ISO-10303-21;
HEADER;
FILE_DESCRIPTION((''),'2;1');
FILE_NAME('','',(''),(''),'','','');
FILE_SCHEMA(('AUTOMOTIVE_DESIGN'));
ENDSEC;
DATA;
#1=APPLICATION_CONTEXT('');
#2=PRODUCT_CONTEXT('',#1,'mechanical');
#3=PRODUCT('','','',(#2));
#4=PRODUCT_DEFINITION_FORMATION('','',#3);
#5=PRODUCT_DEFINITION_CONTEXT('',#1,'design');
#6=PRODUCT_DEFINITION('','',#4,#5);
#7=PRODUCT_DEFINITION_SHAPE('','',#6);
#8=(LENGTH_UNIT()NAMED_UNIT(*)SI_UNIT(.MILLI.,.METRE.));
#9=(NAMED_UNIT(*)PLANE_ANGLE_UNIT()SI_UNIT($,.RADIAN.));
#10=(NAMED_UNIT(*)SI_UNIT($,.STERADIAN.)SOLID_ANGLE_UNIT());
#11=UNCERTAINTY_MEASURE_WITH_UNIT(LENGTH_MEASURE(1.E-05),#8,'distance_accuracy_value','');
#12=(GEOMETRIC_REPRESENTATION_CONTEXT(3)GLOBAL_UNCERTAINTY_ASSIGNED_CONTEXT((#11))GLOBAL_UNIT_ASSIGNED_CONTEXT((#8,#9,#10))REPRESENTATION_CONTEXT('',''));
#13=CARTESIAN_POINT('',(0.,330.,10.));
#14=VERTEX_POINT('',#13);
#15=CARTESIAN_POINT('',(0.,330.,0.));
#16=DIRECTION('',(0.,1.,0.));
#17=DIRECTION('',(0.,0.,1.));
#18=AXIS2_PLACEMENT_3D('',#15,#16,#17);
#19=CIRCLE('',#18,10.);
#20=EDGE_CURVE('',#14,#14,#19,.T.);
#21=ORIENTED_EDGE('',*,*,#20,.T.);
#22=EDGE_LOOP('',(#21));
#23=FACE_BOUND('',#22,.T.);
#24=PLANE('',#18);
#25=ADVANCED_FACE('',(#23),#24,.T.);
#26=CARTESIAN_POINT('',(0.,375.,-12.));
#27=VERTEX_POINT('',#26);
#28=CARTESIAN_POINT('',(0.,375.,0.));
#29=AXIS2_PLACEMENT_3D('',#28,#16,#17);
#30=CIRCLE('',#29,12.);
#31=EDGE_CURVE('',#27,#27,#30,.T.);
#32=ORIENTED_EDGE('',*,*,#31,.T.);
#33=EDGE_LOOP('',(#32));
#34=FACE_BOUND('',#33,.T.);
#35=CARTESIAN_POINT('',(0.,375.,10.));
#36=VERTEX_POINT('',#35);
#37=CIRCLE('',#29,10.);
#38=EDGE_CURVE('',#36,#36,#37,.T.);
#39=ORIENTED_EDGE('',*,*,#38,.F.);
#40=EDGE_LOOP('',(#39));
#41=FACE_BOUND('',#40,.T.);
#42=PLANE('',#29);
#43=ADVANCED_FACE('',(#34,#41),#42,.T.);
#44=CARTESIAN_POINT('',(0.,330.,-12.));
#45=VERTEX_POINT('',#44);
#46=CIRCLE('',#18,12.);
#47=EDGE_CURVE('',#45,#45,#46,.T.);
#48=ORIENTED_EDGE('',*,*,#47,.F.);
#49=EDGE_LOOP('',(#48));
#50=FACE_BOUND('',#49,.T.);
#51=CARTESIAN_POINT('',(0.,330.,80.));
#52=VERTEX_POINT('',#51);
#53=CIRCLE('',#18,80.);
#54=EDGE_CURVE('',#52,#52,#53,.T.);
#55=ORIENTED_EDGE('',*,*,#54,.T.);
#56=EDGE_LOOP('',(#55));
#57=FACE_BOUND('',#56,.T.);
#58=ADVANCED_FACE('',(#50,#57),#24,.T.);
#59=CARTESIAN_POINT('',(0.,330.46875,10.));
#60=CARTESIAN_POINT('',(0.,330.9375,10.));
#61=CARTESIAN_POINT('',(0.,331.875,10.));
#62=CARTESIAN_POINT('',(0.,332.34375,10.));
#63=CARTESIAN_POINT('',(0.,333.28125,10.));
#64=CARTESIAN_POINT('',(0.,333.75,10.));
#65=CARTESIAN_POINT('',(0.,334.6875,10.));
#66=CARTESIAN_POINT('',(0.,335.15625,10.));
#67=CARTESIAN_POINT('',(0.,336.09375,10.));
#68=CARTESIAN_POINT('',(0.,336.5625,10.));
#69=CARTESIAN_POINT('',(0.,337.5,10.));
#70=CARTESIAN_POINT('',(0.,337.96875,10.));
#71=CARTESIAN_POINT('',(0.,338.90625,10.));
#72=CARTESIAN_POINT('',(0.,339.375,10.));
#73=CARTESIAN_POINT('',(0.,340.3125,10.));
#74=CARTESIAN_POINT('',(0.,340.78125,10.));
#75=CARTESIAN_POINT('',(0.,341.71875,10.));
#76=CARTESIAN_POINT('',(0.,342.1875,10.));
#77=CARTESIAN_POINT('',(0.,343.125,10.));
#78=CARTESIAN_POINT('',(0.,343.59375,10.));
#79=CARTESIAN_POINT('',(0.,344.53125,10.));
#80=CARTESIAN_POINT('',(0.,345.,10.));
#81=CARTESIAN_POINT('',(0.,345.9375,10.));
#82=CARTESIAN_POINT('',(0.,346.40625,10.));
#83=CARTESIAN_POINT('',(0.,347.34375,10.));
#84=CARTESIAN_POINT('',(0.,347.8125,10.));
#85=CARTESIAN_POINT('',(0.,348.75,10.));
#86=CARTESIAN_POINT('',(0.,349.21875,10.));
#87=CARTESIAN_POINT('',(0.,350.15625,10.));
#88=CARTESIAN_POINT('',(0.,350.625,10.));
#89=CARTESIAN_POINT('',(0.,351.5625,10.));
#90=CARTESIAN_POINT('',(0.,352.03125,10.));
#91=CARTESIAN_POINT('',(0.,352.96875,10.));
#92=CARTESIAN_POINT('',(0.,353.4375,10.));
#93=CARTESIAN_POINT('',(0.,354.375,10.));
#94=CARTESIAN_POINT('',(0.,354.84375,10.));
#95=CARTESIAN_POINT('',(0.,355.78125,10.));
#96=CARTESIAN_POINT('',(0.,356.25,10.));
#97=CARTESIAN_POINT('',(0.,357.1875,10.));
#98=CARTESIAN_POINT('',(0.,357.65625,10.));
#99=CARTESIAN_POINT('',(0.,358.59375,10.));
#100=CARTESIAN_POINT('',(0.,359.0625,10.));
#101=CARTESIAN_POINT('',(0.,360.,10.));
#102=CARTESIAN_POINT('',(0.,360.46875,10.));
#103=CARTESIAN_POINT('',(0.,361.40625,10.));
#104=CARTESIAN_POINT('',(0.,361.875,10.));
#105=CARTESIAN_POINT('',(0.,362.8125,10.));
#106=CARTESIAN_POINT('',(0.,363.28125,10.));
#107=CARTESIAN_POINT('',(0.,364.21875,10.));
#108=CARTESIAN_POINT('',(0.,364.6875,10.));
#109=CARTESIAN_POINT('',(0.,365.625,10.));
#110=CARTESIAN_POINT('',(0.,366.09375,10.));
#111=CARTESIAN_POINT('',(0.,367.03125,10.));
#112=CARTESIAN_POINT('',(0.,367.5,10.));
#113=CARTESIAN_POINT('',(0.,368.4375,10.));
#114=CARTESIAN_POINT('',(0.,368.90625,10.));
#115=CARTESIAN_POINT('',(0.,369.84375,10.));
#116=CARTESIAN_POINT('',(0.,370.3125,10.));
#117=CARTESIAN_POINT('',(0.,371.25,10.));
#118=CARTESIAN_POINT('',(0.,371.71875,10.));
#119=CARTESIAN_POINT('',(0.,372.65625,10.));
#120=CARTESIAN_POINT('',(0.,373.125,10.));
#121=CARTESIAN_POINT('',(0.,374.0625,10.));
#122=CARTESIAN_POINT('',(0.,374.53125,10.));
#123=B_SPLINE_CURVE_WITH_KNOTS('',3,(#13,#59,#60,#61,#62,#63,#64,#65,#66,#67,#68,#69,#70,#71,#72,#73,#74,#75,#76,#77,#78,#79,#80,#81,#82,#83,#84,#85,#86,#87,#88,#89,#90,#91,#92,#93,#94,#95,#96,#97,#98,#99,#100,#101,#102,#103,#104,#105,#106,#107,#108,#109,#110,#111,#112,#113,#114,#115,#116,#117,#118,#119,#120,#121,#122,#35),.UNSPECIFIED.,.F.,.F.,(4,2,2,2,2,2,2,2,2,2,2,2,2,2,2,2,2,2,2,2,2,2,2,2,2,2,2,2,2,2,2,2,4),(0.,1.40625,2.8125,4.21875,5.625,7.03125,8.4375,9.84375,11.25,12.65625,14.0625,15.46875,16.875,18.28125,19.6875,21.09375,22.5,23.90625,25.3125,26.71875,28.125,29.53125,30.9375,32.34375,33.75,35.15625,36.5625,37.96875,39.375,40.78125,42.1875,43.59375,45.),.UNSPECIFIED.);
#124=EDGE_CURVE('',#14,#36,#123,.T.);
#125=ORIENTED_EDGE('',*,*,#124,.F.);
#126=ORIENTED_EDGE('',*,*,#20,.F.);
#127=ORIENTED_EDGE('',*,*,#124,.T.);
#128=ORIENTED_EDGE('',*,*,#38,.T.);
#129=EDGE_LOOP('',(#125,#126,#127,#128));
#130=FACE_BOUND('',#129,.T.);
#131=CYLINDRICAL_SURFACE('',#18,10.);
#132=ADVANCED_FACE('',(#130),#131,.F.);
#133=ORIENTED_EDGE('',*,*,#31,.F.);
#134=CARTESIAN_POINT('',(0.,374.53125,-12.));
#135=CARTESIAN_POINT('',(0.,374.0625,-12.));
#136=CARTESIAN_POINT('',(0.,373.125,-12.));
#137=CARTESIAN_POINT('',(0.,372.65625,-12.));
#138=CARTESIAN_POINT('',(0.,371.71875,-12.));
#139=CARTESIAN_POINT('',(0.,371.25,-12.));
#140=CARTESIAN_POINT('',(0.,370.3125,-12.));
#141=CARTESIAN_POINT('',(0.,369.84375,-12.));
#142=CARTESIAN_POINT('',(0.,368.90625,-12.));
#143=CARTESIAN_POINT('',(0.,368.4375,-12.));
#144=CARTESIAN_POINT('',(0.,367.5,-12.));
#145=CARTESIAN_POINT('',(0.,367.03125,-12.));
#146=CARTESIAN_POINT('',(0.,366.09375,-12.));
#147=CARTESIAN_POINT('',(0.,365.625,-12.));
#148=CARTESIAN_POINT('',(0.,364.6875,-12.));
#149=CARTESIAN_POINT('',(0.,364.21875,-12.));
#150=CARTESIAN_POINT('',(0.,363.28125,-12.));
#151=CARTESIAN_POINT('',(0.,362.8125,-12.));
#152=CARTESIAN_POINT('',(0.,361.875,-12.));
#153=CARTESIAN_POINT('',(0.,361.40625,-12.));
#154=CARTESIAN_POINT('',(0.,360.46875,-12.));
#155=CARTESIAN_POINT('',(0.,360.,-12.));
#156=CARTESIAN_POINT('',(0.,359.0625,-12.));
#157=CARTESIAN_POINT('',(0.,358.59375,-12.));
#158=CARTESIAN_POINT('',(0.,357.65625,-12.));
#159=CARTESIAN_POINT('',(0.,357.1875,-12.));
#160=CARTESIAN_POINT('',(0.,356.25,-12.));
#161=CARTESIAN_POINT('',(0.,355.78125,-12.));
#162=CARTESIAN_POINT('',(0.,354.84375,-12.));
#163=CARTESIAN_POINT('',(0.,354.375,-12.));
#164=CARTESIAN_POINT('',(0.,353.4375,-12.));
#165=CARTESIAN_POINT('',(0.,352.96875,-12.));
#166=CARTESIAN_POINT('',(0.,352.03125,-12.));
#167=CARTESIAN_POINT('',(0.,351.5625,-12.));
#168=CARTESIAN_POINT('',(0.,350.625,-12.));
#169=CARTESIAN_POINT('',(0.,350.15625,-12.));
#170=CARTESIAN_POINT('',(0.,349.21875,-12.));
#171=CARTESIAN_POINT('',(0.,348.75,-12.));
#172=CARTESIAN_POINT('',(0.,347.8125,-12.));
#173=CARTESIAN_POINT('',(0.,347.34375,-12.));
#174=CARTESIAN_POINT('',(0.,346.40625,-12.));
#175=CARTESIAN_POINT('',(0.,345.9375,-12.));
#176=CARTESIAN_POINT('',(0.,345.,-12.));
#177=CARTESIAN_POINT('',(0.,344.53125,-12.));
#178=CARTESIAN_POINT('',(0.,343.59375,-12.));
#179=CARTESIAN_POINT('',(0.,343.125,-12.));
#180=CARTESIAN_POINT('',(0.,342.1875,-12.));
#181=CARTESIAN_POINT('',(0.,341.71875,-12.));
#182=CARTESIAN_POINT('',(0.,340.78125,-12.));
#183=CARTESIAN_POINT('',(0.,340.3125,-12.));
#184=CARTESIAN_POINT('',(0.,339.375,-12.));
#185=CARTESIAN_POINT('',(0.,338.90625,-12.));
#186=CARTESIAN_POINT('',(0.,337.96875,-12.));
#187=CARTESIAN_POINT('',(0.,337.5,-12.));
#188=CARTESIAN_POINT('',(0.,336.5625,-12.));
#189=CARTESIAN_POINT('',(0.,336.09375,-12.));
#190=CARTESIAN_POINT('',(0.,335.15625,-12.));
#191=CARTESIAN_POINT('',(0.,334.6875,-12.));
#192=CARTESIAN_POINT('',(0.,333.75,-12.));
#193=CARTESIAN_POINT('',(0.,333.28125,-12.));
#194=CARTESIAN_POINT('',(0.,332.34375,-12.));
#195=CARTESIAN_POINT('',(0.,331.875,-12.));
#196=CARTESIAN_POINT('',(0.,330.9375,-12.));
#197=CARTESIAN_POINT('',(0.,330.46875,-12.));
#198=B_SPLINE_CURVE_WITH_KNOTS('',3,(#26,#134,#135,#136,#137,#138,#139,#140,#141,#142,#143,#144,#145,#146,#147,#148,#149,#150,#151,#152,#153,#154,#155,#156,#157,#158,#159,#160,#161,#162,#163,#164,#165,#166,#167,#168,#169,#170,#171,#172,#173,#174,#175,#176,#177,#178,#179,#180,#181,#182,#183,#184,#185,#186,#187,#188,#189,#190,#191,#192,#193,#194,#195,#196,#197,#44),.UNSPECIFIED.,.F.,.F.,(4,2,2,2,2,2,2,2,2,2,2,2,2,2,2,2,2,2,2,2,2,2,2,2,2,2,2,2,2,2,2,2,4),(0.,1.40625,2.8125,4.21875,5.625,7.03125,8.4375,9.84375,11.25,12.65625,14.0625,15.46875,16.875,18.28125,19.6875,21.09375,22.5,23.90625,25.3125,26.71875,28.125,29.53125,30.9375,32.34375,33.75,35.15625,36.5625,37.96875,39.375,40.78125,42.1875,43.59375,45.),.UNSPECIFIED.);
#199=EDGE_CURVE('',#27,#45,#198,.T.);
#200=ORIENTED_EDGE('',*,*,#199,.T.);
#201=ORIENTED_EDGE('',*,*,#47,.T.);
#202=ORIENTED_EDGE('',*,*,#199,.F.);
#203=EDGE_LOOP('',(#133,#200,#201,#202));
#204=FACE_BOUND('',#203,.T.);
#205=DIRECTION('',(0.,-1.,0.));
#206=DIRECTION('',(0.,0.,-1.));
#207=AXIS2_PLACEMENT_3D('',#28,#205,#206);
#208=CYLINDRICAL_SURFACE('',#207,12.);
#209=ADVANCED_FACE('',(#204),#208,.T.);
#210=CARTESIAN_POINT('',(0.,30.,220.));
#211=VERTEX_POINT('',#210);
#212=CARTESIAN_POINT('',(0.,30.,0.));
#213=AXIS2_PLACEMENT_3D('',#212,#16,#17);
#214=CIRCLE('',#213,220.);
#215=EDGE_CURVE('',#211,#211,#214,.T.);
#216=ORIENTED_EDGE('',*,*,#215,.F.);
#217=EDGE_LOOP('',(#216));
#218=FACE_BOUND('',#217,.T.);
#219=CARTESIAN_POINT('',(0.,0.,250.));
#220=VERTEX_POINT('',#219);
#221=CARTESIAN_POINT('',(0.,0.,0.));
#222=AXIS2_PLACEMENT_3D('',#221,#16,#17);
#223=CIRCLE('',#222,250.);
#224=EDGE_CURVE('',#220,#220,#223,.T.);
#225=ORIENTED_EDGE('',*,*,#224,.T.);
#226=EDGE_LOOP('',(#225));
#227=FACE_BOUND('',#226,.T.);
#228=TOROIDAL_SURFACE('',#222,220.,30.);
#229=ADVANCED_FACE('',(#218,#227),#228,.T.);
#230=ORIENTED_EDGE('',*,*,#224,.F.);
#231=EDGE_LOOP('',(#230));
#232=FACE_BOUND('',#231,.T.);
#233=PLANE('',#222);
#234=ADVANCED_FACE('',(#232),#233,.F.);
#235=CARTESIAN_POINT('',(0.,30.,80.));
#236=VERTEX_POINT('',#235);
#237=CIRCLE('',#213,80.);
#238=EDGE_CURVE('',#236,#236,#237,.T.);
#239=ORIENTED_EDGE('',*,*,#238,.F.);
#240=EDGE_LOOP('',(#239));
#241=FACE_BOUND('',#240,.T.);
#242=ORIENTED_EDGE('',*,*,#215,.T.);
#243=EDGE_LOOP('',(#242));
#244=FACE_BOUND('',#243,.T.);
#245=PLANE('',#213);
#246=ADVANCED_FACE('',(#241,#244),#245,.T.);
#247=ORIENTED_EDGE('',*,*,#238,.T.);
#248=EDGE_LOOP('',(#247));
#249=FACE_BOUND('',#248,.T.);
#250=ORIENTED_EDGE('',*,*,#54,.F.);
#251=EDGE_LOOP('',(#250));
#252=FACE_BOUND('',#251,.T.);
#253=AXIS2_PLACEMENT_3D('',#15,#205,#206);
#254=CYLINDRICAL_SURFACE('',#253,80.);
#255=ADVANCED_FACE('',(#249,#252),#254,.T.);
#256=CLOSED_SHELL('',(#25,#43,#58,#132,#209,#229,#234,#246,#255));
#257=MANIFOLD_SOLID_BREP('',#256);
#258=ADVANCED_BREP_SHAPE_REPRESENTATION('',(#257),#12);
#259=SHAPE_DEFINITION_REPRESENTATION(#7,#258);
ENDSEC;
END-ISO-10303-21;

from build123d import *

# Parameters (mm, degrees)
SKETCH_1_R          = 250
EXTRUDE_2_DEPTH     = 30
FILLET_1_R          = 30
SKETCH_4_R          = 80
EXTRUDE_4_DEPTH     = 300
SKETCH_5_R          = 12
EXTRUDE_6_DEPTH     = 45
SKETCH_6_R          = 10
CUT_EXTRUDE_2_DEPTH = 45


with BuildPart() as part:
    # 草图1 → 凸台-拉伸2 (new body)
    with BuildSketch(Plane(origin=(0, 0, 0), x_dir=(1, 0, 0), z_dir=(0, 1, 0))):
        with Locations(Location((0, 0, 0), (0, 0, 270))):
            Circle(SKETCH_1_R)
    extrude(amount=EXTRUDE_2_DEPTH)

    # 圆角1
    fillet_1_edges = [part.edges().sort_by_distance(p)[0] for p in [
        (0, 30, -250),
    ]]
    fillet(fillet_1_edges, radius=FILLET_1_R - 0.0001)  # a hair under: the kernel refuses the full size

    # 草图4 → 凸台-拉伸4 (add)
    with BuildSketch(Plane(origin=(0, 30, 0), x_dir=(1, 0, 0), z_dir=(0, 1, 0))):
        with Locations(Location((0, 0, 0), (0, 0, 270))):
            Circle(SKETCH_4_R)
    extrude(amount=EXTRUDE_4_DEPTH)

    # 草图5 → 凸台-拉伸6 (add)
    with BuildSketch(Plane(origin=(0, 330, 0), x_dir=(1, 0, 0), z_dir=(0, 1, 0))):
        with Locations(Location((0, 0, 0), (0, 0, 90))):
            Circle(SKETCH_5_R)
    extrude(amount=EXTRUDE_6_DEPTH)

    # 草图6 → 切除-拉伸2 (cut)
    with BuildSketch(Plane(origin=(0, 375, 0), x_dir=(1, 0, 0), z_dir=(0, 1, 0))):
        with Locations(Location((0, 0, 0), (0, 0, 270))):
            Circle(SKETCH_6_R)
    extrude(amount=-CUT_EXTRUDE_2_DEPTH, mode=Mode.SUBTRACT)


solid = part.part
